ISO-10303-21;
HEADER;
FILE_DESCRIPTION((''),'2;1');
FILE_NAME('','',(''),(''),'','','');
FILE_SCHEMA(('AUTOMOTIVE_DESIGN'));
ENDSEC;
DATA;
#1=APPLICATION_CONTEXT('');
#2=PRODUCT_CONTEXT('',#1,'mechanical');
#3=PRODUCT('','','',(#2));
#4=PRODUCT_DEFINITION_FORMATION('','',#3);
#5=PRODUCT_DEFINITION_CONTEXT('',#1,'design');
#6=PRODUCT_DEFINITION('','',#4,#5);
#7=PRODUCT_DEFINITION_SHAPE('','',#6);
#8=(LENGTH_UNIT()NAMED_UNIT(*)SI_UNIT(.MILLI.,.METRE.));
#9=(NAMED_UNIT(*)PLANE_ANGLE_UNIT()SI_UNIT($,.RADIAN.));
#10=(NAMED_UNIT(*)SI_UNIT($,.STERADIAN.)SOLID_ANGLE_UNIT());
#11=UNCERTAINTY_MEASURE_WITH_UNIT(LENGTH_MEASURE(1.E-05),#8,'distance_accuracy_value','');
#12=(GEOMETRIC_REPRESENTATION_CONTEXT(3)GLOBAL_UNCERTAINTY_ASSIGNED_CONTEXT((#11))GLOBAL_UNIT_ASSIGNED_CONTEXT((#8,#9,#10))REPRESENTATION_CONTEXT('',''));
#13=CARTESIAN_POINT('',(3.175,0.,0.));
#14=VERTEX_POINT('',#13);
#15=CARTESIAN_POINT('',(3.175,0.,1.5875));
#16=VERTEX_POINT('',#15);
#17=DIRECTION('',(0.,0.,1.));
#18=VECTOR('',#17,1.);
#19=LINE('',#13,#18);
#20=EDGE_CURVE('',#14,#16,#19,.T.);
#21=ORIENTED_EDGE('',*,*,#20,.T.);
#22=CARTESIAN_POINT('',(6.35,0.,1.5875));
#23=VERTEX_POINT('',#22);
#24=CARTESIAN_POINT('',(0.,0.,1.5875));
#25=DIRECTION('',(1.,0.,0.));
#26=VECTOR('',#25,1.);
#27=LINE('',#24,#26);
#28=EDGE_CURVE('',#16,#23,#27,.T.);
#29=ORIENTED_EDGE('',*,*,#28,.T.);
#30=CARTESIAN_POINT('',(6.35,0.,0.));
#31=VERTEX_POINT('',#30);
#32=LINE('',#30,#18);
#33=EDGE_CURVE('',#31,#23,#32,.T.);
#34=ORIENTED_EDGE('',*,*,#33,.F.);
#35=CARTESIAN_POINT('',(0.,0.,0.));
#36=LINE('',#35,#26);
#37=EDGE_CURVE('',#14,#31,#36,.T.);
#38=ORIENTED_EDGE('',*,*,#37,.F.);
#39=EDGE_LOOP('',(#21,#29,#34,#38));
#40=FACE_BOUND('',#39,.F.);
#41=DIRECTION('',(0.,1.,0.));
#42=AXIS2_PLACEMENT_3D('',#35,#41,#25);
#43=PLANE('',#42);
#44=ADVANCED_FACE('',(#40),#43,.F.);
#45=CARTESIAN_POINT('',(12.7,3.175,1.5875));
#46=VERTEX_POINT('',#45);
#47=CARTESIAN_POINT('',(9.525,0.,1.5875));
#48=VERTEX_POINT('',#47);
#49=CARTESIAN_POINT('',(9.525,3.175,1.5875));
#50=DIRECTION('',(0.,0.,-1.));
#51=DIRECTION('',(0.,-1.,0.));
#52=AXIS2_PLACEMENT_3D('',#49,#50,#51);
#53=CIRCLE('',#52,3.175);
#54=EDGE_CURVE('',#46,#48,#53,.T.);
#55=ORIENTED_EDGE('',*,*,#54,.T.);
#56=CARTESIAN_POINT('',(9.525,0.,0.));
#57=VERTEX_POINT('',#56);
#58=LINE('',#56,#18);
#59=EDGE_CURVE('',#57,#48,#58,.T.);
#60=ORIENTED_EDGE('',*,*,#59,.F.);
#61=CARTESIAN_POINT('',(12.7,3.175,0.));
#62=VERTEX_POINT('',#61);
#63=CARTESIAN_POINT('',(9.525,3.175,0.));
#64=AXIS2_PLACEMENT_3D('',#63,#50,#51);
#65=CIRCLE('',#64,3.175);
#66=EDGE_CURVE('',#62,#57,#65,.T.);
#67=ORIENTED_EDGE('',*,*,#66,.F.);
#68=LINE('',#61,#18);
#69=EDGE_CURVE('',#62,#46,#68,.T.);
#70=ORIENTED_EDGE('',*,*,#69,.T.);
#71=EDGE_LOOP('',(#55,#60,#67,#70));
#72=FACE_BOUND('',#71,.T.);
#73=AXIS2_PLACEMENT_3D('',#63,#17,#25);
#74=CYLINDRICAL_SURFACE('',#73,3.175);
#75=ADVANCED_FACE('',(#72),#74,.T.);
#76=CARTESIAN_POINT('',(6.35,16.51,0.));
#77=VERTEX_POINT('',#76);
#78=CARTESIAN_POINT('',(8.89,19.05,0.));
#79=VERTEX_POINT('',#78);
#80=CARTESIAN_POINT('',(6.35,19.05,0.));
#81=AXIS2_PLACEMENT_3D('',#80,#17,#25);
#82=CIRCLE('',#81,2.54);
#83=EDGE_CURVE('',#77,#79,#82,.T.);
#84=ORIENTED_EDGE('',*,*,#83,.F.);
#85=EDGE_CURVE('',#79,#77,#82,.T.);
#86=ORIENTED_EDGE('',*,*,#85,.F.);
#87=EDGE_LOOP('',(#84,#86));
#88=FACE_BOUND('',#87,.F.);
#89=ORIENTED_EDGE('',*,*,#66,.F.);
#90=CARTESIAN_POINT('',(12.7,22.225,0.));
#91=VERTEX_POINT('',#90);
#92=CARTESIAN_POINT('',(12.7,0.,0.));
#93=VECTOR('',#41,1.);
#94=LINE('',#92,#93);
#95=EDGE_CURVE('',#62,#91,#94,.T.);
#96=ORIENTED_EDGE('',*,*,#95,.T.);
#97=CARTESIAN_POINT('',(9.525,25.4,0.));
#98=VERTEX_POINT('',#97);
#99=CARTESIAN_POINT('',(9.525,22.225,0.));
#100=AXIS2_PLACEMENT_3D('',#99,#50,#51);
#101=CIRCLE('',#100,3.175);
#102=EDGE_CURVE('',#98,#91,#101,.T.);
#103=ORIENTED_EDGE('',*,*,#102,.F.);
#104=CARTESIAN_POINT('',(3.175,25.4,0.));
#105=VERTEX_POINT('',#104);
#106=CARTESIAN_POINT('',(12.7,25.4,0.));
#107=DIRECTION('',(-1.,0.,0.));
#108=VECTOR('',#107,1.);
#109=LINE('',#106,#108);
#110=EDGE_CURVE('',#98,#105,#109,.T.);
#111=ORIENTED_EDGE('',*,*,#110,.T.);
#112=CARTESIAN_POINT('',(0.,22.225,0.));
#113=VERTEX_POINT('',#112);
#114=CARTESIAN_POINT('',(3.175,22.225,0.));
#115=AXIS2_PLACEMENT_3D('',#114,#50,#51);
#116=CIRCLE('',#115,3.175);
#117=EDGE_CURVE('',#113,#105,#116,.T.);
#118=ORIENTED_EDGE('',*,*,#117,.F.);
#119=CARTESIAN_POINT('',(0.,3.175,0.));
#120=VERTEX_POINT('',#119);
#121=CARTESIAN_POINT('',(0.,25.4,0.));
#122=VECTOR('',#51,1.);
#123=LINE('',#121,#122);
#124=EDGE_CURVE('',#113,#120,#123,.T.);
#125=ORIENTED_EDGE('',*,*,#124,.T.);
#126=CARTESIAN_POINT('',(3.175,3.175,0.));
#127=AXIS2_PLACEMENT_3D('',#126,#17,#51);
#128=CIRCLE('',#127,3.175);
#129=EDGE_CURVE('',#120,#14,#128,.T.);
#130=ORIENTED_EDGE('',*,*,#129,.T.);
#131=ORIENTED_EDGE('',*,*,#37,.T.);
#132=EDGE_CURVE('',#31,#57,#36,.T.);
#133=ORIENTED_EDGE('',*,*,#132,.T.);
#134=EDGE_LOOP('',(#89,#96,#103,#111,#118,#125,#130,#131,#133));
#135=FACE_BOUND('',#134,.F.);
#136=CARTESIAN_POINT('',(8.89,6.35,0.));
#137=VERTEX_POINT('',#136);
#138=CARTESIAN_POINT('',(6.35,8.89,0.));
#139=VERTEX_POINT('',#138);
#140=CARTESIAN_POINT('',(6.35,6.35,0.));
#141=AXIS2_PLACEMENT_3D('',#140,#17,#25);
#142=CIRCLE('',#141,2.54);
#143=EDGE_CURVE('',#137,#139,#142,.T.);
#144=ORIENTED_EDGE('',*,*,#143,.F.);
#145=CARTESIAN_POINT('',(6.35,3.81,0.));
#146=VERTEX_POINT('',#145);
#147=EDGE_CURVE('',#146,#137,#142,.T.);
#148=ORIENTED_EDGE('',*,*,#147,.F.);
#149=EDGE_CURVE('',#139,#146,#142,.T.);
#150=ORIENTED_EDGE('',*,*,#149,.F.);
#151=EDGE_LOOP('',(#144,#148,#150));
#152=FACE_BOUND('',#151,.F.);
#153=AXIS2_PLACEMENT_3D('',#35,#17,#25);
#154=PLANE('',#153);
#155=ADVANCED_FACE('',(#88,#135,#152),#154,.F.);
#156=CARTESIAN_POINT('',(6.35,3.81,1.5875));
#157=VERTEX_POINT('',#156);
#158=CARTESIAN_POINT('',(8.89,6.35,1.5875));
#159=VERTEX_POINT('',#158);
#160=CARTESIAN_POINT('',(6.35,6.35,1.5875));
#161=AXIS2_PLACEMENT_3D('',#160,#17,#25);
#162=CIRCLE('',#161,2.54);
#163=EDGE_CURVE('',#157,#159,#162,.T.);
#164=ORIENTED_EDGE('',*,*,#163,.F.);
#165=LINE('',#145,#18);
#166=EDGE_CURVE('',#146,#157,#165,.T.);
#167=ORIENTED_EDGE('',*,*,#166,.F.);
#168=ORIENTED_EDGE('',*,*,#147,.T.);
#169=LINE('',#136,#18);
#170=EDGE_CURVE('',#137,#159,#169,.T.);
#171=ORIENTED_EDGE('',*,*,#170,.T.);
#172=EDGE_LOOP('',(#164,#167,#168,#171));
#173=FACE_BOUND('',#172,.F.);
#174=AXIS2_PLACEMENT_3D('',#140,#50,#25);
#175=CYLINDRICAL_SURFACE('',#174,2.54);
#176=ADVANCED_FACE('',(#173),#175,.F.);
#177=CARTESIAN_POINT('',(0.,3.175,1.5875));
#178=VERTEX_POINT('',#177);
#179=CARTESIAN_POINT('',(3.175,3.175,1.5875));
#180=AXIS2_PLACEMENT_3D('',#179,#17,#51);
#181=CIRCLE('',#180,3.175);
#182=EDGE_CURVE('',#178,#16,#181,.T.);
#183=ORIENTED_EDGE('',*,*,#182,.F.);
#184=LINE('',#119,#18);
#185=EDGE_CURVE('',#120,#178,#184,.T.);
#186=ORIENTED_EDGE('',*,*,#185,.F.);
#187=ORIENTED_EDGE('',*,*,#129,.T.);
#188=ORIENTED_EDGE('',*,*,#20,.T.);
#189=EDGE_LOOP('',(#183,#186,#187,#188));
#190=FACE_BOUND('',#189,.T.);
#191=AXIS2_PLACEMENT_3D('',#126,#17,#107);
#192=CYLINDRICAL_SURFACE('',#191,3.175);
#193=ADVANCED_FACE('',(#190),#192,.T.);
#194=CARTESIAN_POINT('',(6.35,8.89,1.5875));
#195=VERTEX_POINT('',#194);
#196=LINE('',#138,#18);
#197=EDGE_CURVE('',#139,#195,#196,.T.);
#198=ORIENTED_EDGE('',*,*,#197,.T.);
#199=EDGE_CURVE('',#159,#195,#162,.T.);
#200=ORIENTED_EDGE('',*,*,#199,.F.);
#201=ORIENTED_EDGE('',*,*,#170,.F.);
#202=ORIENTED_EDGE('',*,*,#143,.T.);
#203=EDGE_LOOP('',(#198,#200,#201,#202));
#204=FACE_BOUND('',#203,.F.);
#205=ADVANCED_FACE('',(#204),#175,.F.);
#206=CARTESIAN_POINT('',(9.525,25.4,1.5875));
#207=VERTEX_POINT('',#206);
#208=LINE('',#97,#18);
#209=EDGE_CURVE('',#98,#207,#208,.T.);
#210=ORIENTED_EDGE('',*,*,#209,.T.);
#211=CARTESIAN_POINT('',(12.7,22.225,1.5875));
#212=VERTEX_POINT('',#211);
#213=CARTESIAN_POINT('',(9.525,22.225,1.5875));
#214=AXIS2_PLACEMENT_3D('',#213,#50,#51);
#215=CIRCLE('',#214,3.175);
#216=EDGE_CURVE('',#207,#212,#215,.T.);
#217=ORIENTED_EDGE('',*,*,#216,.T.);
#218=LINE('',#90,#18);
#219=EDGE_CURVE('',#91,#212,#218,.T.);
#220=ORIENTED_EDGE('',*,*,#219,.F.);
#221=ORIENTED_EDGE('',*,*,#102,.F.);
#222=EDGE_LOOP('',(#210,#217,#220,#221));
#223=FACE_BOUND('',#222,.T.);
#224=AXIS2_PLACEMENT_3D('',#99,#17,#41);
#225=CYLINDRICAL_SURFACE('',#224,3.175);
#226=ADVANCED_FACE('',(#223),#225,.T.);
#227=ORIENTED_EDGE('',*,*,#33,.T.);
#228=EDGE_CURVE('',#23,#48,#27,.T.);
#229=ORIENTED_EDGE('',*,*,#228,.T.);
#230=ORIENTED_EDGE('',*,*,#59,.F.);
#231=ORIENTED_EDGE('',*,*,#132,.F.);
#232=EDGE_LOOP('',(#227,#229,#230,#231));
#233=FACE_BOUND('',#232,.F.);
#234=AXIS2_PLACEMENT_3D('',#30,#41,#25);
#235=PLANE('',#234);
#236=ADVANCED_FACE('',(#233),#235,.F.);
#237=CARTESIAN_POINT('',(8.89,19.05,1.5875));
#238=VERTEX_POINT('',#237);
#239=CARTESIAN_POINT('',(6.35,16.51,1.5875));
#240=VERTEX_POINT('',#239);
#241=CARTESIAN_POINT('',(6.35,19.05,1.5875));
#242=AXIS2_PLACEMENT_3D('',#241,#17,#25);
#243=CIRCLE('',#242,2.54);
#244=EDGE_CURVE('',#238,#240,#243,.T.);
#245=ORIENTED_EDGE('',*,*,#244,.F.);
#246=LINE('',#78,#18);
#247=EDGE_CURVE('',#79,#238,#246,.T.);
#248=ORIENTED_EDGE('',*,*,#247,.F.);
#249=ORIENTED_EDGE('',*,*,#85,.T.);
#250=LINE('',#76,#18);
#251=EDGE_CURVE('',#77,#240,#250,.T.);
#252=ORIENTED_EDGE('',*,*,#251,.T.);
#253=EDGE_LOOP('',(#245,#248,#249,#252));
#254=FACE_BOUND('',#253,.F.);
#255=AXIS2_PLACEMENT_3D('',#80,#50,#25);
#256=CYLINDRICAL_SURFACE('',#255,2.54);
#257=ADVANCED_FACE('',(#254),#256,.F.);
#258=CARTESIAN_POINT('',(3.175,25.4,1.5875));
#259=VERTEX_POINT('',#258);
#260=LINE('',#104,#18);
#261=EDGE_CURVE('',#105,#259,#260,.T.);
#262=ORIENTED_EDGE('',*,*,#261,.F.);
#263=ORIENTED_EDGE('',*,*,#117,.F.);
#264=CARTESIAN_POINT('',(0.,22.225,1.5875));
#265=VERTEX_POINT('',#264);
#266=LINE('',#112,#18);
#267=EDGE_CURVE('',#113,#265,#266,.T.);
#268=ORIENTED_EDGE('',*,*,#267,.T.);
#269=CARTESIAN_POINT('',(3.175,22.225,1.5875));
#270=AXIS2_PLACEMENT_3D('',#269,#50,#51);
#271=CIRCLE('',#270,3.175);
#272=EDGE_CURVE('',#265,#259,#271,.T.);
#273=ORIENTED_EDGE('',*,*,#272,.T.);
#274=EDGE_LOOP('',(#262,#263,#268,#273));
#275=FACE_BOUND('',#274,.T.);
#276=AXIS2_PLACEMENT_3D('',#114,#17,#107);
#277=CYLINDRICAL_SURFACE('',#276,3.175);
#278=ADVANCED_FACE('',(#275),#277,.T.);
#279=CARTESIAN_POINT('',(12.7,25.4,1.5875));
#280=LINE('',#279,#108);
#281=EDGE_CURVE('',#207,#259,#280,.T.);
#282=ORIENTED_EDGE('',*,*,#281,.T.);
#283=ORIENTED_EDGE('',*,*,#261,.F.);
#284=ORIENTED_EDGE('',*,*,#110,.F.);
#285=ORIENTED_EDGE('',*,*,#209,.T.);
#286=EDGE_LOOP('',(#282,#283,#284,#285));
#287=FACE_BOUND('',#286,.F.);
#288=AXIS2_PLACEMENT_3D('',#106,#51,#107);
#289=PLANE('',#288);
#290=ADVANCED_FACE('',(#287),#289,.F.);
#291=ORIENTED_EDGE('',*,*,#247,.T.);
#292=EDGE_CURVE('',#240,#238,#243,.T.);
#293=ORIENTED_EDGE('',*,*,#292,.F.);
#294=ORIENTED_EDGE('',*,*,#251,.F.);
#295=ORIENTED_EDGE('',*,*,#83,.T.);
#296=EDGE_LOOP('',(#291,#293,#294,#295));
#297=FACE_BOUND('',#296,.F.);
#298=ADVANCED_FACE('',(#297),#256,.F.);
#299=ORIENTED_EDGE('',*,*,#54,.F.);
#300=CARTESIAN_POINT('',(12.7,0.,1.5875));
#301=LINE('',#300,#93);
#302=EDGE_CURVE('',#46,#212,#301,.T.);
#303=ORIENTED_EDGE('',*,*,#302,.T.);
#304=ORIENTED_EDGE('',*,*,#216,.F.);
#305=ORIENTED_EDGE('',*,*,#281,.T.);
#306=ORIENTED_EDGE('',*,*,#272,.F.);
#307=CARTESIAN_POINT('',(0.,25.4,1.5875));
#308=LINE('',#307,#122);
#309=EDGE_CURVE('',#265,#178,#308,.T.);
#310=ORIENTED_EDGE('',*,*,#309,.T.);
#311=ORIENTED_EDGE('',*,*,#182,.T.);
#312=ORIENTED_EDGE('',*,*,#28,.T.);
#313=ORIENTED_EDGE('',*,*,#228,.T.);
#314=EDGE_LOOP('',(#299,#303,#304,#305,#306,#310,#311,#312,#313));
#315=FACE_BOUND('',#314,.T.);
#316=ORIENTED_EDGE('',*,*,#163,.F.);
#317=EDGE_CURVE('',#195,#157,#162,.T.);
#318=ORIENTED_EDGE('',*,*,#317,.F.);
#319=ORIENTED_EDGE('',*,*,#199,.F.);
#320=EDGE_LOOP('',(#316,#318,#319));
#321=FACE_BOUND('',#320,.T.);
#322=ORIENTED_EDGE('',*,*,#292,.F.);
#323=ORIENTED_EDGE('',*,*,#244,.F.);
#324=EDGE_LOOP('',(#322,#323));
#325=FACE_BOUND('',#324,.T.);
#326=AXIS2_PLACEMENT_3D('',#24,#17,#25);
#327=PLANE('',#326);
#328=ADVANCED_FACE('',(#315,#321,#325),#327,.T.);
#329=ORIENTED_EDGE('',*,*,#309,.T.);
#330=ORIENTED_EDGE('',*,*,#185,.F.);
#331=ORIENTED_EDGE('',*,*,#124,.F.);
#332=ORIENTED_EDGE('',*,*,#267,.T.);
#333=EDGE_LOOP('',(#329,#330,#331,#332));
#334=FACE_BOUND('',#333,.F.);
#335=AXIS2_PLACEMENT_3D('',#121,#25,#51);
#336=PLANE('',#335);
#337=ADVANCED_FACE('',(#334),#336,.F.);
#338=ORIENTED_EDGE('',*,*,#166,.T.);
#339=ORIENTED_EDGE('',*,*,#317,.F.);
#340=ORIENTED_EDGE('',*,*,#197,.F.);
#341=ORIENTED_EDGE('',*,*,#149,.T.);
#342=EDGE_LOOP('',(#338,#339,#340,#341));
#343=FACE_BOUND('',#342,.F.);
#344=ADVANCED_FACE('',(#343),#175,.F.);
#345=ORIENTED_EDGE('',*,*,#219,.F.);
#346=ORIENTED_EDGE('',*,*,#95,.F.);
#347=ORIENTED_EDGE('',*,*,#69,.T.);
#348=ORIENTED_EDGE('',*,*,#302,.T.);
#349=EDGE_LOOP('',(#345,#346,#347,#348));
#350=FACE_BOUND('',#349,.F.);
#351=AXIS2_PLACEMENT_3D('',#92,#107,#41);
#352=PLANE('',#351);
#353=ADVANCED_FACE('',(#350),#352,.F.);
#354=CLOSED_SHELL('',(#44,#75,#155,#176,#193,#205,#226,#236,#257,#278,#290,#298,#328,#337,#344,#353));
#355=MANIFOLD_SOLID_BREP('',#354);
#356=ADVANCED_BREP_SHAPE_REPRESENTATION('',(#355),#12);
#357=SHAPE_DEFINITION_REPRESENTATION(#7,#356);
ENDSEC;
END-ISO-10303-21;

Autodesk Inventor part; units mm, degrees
ref_plane "YZ Plane" through (0, 0, 0) normal (1, 0, 0) x (0, 1, 0)
ref_plane "XZ Plane" through (0, 0, 0) normal (0, 1, 0) x (-1, 0, 0)
ref_plane "XY Plane" through (0, 0, 0) normal (0, 0, 1) x (1, 0, 0)
sketch "Sketch1" plane through (0, 0, 0) normal (0, 0, 1) x (1, 0, 0)
  line L0 (0, 0) -> (12.7, 0)
  line L1 (12.7, 0) -> (12.7, 25.4)
  line L2 (12.7, 25.4) -> (0, 25.4)
  line L3 (0, 25.4) -> (0, 0)
  line L4 (6.35, 0) -> (6.35, 6.35)
  circle A0 centre (6.35, 6.35) radius 2.54
  line L5 (6.35, 6.35) -> (6.35, 19.05)
  circle A1 centre (6.35, 19.05) radius 2.54
  dimension "d0" = 12.7
  dimension "d1" = 25.4
  dimension "d2" = 6.35
  dimension "d3" = 5.08
  dimension "d4" = 12.7
  dimension "d5" = 5.08
extrude "Extrusion1" add sketch "Sketch1" along normal blind 1.5875
fillet "Fillet1" radius 3.175 4 edges at (12.7, 25.4, 0.7937) (0, 25.4, 0.7937) (12.7, 0, 0.7937) (0, 0, 0.7937)
properties part number "polySpacer2"
